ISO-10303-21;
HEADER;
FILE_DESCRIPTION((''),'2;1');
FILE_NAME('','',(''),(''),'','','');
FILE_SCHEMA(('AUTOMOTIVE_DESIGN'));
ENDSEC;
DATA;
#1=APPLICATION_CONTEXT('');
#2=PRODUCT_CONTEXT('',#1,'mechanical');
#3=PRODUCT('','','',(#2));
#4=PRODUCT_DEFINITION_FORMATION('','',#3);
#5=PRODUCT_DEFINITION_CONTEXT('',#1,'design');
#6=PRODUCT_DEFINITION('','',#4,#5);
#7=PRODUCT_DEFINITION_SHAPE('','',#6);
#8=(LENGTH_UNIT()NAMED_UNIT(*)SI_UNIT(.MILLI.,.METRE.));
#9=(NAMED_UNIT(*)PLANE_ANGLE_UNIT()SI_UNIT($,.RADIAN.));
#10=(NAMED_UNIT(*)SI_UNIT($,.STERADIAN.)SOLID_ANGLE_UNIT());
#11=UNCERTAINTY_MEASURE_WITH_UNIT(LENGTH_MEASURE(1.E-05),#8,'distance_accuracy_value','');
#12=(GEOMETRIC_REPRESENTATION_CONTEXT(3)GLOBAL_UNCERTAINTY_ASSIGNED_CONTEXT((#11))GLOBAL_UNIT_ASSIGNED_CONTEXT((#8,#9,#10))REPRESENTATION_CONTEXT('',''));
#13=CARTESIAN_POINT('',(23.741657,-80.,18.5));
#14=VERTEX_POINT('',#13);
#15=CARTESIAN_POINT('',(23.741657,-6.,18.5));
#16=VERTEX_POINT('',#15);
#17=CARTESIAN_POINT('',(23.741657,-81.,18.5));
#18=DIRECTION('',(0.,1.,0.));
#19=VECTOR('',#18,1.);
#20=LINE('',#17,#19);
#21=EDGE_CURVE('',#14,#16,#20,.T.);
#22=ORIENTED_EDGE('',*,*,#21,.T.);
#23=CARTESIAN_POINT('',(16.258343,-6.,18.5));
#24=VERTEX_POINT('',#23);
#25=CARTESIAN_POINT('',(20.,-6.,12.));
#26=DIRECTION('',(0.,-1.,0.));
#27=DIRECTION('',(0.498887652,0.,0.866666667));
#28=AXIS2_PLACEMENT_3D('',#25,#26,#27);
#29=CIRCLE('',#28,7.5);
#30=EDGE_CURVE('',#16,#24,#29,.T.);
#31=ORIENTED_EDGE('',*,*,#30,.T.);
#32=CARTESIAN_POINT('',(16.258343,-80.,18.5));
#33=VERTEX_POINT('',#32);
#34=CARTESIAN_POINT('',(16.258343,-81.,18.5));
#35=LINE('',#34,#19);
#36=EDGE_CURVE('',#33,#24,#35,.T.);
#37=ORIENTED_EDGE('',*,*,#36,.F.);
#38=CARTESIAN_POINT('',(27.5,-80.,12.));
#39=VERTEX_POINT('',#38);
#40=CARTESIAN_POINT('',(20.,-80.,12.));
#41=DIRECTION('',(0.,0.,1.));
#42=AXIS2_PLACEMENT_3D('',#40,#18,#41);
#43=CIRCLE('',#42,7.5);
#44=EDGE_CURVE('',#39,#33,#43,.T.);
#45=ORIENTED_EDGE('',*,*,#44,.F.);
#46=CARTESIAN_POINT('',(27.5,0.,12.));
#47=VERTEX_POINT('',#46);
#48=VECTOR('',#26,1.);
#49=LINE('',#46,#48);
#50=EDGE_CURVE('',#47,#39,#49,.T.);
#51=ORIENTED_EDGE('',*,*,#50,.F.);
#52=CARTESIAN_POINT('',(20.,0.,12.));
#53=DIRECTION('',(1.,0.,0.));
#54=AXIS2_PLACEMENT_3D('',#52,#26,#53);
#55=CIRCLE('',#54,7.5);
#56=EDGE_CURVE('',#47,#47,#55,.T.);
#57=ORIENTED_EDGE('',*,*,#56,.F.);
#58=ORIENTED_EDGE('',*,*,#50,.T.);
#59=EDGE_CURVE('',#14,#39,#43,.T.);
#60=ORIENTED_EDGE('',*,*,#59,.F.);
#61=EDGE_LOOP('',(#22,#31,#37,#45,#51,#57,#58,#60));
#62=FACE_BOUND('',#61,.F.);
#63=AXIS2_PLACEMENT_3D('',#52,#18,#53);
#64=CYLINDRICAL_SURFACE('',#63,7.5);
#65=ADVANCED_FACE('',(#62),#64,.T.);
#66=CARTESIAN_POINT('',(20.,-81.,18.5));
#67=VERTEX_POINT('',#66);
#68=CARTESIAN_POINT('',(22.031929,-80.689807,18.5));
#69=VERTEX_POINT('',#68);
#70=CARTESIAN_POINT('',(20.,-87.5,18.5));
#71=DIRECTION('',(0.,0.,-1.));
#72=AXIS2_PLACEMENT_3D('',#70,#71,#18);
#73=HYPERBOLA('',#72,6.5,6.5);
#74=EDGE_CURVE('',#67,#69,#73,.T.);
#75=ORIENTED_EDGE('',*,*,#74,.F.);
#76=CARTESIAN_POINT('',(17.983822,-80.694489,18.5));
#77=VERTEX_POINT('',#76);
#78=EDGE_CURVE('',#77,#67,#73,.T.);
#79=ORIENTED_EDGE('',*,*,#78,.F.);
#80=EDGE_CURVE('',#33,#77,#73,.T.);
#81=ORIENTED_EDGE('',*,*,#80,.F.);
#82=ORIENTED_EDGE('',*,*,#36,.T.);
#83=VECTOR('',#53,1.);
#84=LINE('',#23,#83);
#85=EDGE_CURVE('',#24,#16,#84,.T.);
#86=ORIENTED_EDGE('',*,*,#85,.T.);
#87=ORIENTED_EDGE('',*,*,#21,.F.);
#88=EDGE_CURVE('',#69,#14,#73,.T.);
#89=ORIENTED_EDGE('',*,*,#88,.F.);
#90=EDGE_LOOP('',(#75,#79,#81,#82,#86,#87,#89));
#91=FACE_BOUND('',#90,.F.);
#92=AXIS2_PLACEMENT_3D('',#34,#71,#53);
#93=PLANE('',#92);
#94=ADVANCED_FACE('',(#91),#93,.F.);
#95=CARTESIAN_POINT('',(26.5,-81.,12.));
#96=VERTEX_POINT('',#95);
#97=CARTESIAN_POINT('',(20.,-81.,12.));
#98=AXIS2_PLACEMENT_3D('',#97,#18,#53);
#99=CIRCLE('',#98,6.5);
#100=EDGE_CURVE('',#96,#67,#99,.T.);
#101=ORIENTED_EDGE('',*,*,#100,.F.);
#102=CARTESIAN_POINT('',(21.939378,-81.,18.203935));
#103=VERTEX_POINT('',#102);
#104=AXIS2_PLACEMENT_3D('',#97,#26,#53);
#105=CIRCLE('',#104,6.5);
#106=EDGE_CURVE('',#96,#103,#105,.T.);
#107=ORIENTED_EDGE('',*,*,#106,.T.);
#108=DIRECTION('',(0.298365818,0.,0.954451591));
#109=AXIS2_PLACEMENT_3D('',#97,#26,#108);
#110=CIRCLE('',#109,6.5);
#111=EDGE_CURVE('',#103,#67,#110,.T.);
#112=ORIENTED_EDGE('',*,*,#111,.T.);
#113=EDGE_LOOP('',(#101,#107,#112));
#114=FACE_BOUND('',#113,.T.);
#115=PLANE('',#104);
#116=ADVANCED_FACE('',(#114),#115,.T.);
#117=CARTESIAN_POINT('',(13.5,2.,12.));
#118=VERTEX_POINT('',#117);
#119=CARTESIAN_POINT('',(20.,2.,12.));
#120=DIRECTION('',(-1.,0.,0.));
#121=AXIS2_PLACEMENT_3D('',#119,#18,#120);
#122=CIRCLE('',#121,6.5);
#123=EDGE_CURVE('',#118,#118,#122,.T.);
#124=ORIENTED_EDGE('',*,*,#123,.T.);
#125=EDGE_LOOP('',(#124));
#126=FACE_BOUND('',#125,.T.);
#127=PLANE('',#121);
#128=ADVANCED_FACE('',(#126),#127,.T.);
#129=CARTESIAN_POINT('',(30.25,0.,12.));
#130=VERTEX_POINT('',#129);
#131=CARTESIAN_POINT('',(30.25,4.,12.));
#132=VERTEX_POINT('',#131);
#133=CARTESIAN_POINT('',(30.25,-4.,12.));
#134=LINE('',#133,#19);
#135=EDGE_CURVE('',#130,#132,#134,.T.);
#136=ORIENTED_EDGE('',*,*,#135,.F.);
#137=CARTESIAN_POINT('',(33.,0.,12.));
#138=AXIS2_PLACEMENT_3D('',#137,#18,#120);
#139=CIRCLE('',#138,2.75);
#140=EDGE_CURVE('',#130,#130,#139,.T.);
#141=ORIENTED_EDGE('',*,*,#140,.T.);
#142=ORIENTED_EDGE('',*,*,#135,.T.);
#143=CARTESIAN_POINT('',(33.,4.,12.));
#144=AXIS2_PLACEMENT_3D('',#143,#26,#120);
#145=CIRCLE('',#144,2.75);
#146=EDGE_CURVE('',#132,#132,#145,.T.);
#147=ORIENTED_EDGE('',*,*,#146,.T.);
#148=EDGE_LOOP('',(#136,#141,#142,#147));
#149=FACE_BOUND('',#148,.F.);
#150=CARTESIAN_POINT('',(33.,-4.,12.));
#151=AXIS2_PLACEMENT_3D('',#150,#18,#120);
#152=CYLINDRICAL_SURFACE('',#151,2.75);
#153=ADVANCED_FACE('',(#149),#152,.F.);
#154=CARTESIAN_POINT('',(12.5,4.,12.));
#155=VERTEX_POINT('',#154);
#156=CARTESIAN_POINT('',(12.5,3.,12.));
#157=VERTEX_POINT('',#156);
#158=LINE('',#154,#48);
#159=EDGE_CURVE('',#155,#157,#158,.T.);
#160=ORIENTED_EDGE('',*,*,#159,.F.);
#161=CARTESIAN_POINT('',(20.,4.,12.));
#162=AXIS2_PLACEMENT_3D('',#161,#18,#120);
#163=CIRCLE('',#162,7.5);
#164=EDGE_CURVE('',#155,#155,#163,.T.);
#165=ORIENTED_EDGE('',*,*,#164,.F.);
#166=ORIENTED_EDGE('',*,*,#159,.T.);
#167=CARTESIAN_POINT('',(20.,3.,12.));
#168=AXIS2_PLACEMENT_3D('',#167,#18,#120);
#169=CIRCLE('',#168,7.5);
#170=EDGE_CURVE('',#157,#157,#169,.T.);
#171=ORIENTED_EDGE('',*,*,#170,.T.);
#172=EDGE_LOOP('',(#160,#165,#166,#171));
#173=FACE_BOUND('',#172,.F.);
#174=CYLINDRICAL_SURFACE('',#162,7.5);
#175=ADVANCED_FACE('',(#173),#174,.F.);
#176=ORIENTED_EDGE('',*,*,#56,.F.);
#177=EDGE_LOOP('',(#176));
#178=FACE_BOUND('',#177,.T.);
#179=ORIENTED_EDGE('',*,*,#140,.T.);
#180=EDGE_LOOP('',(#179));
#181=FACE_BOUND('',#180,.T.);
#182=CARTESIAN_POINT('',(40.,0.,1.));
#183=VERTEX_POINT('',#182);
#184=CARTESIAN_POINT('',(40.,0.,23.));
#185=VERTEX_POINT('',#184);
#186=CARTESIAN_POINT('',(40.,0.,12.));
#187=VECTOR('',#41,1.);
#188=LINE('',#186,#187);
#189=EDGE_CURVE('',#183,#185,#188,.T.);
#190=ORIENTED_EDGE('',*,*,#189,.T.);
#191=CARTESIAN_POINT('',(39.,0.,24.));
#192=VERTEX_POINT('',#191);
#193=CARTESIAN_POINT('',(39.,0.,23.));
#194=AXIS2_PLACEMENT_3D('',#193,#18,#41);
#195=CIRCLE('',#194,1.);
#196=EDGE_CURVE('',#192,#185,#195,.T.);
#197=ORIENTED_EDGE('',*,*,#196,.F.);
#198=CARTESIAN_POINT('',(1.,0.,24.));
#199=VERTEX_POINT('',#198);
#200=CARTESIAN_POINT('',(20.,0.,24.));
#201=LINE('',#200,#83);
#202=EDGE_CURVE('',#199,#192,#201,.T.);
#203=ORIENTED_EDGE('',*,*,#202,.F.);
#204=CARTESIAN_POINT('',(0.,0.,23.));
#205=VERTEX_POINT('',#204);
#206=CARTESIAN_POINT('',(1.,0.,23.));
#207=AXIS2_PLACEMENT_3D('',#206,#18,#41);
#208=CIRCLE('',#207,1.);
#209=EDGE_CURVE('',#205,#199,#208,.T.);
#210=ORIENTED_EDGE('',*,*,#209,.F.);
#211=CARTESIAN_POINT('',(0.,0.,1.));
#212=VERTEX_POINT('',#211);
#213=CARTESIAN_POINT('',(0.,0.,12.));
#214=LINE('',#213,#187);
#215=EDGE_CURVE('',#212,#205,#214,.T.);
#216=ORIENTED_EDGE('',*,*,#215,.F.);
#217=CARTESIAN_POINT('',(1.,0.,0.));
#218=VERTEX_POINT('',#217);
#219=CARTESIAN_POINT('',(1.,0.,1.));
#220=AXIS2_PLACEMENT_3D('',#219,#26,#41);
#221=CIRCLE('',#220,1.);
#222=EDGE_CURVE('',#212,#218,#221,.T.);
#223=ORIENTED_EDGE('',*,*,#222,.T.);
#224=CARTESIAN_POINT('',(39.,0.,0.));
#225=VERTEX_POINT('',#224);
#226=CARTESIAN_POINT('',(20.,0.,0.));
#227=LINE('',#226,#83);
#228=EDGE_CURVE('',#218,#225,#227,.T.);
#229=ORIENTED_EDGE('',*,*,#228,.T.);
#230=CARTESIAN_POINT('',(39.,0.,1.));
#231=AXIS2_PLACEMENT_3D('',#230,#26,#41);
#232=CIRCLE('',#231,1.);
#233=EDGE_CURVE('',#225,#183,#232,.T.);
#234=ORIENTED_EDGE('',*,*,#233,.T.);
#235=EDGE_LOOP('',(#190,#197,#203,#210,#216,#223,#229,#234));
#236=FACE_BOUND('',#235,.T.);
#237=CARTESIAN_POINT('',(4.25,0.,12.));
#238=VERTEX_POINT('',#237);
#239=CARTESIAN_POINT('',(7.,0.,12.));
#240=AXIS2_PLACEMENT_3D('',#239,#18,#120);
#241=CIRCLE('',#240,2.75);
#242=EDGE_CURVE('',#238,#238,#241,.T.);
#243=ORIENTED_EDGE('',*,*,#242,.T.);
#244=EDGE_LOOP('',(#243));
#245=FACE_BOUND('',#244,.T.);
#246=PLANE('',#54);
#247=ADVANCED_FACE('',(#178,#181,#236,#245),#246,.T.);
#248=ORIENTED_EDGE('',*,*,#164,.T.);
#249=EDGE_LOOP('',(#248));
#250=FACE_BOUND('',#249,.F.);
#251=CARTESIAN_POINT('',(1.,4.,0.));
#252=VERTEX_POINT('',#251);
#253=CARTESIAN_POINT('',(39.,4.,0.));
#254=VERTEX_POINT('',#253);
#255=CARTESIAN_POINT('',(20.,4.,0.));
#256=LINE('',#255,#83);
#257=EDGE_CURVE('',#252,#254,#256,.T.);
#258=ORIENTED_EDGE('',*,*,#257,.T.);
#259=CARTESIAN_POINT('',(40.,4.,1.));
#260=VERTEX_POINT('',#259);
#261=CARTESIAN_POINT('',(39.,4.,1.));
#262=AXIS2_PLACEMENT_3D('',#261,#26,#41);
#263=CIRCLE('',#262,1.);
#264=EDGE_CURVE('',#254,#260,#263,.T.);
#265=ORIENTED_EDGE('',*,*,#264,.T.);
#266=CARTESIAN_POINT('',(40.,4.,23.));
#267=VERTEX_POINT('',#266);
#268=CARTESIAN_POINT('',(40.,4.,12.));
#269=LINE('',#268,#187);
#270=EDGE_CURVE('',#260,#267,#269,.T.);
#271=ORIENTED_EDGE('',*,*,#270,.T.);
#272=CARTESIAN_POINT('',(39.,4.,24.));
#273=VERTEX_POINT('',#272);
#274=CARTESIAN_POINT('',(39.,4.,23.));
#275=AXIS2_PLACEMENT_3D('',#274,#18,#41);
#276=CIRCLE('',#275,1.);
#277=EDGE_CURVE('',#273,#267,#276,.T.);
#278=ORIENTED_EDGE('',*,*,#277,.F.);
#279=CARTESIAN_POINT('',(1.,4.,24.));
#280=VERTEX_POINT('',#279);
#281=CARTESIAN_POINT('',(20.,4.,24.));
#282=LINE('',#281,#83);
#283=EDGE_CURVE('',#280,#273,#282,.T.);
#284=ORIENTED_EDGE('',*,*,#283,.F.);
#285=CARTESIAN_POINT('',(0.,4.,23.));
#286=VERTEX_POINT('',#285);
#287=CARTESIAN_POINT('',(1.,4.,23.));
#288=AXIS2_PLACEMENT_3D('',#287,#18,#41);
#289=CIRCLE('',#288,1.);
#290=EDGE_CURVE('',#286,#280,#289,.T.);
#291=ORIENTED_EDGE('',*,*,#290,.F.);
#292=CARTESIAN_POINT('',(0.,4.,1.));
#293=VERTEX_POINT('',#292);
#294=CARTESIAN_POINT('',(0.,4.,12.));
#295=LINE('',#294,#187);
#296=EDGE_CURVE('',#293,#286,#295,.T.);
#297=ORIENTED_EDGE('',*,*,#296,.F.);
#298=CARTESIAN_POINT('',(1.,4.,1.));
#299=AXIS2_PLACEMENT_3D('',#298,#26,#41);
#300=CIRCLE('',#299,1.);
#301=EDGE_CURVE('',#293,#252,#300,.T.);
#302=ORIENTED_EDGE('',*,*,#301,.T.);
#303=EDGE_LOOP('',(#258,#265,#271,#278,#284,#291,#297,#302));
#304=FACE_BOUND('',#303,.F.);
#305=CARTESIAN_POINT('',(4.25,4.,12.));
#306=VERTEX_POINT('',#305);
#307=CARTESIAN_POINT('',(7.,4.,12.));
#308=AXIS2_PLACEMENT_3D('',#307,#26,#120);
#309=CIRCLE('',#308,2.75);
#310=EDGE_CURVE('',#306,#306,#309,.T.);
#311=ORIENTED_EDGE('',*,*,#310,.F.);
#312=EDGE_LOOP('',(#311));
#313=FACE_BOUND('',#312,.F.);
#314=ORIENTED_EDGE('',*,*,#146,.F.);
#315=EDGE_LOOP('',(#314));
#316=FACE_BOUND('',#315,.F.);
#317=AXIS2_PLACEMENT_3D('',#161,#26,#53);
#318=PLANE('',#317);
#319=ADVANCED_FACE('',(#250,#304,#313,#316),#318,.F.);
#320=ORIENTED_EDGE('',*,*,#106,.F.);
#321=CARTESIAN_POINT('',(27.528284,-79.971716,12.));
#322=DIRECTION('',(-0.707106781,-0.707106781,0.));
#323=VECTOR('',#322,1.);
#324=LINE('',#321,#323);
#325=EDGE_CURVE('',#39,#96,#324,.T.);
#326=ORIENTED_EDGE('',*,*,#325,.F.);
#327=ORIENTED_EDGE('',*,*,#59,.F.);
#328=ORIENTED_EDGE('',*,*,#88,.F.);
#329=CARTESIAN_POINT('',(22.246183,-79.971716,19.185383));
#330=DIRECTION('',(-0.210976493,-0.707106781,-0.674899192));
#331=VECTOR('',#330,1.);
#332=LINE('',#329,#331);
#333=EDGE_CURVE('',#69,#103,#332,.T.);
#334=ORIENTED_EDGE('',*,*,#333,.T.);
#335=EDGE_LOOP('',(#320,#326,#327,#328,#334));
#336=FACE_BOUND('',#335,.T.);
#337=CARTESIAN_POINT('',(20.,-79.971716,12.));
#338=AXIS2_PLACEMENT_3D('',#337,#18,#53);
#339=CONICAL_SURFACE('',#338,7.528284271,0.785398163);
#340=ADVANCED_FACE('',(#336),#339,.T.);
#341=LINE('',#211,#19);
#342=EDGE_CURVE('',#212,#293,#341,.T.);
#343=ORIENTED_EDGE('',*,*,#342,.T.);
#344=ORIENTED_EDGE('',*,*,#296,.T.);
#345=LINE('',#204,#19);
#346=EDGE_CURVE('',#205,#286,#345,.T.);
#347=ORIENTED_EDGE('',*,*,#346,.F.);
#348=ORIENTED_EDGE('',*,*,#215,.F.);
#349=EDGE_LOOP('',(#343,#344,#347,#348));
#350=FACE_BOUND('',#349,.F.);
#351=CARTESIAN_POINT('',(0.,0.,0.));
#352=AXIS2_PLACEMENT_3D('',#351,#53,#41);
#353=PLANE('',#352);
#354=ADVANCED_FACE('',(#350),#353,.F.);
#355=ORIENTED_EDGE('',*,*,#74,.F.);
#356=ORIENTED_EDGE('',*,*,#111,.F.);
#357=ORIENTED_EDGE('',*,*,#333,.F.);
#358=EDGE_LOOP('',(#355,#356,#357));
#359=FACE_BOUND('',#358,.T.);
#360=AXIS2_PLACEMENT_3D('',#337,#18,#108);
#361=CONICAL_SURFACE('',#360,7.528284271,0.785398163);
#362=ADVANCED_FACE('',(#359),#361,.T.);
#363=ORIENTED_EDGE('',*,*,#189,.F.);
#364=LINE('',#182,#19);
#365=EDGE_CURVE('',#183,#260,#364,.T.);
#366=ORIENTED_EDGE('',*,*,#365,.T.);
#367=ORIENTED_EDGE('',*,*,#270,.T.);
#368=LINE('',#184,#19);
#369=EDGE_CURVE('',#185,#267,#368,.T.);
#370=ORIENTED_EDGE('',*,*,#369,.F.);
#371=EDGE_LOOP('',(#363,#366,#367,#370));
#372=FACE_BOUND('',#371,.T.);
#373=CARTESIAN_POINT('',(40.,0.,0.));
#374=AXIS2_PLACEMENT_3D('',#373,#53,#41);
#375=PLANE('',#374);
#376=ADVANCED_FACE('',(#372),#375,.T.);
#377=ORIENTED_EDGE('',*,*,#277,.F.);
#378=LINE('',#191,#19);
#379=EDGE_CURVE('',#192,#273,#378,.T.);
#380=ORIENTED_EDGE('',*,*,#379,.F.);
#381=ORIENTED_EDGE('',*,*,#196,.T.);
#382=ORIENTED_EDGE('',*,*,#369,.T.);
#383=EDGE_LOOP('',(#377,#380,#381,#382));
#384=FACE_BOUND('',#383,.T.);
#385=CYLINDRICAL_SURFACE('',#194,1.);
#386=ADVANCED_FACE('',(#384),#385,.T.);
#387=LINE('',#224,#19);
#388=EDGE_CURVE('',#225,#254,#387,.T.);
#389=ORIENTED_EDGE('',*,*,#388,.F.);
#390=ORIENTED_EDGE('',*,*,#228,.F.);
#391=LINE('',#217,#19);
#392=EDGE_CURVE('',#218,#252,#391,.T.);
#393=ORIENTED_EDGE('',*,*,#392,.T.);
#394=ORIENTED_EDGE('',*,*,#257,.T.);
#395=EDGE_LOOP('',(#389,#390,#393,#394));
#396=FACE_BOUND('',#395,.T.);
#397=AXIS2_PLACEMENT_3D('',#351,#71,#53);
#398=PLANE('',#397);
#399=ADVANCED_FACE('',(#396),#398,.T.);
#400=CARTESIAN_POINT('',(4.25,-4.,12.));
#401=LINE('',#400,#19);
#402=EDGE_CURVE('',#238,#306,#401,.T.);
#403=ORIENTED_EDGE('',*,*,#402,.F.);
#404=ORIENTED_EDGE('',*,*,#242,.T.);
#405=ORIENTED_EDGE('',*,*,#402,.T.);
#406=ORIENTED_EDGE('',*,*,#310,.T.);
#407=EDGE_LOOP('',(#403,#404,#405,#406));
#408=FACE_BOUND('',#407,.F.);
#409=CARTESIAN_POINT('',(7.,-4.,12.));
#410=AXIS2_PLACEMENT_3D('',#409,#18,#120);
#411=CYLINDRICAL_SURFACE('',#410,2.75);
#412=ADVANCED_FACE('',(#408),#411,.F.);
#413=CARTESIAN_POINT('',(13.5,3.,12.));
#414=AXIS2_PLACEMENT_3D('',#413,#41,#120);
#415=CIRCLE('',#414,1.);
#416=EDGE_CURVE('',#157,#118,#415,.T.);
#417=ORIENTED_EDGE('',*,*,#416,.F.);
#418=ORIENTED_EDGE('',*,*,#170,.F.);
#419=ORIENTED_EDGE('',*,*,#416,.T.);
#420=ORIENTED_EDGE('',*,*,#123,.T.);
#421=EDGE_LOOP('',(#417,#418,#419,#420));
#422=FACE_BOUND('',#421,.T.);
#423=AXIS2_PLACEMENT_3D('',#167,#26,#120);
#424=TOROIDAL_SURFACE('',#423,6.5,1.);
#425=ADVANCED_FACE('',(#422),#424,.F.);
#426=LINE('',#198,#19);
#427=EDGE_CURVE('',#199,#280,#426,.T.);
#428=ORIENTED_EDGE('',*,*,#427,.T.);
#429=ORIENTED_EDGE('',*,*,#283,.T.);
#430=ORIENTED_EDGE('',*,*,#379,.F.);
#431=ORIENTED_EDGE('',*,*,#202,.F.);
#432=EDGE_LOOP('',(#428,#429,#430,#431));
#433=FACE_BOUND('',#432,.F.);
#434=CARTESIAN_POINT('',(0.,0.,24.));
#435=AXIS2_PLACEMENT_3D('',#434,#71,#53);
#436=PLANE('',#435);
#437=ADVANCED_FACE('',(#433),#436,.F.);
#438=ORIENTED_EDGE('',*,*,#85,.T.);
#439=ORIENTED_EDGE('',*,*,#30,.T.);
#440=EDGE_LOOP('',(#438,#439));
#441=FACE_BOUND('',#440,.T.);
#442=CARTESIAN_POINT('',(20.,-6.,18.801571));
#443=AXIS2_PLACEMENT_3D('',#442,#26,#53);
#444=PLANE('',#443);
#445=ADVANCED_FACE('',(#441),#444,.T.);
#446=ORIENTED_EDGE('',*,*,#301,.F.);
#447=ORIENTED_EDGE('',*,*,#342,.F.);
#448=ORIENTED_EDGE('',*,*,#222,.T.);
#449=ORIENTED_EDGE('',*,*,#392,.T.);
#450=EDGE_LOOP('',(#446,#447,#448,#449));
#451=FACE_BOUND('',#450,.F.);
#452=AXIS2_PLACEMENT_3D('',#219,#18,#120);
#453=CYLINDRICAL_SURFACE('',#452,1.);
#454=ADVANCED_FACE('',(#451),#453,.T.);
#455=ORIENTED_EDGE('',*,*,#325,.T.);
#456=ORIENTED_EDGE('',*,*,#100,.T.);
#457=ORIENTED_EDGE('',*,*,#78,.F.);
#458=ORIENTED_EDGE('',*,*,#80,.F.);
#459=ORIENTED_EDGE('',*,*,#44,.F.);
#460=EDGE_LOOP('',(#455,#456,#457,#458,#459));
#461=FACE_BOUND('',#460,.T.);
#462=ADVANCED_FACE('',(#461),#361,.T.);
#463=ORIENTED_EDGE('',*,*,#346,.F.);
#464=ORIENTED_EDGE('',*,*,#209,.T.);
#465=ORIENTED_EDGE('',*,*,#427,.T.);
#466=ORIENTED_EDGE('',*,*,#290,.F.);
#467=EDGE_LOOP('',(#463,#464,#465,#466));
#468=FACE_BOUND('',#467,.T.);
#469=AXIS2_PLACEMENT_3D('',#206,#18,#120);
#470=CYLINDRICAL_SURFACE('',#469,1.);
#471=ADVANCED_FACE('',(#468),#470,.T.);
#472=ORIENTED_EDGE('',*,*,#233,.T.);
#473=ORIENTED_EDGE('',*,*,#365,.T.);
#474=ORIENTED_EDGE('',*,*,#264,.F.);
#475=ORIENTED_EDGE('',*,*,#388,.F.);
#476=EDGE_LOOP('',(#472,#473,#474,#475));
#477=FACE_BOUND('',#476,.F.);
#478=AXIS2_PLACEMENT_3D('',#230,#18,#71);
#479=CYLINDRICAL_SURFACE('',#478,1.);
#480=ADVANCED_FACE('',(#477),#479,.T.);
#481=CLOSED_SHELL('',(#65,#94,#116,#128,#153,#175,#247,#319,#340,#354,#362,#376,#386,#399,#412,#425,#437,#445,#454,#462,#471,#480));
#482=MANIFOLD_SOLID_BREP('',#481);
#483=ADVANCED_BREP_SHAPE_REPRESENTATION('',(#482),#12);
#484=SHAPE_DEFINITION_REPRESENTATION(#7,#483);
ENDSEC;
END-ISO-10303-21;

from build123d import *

# Parameters (mm, degrees)
F0_W        = 40
F0_H        = 24
F0_R        = 2.5
F0_R_2      = 7.5
F1_DEPTH    = 4
F3_DEPTH    = 81
F4_D        = 5.5
F4_DEPTH    = 4
F4_TIP      = 1.6523667023
F6_DEPTH    = 75
F7_T2_ANGLE = 287.359476763
F7_T4_ANGLE = 107.2329087186
F8_R        = 7.5
F9_DEPTH    = 2
F10_R       = 1


# Not quite as in the source:
# - a fillet or chamfer that OpenCascade refuses, or shapes differently, is made with other operations: its cross-section is extruded or revolved along the edge and cut away or added


with BuildPart() as f1:
    # F0 (on Front) → F1 (new body)
    with BuildSketch(Plane.XZ):
        with Locations((20, 12)):
            Rectangle(F0_W, F0_H)
        with Locations((7, 12)):
            Circle(F0_R, mode=Mode.SUBTRACT)
        with Locations((20, 12)):
            Circle(F0_R_2, mode=Mode.SUBTRACT)
        with Locations((33, 12)):
            Circle(F0_R, mode=Mode.SUBTRACT)
        with Locations((20, 12)):
            Circle(F0_R_2)
        with Locations((7, 12)):
            Circle(F0_R)
        with Locations((33, 12)):
            Circle(F0_R)
    extrude(amount=-F1_DEPTH)

    # F0 (on Front) → F3 (join)
    with BuildSketch(Plane.XZ):
        with Locations((20, 12)):
            Circle(F0_R_2)
    extrude(amount=F3_DEPTH)

    # F4
    with Locations(Plane.XZ):
        with Locations((33, 12), (7, 12)):
            Hole(F4_D / 2, depth=F4_DEPTH)
            with Locations((0, 0, -(F4_DEPTH + F4_TIP / 2))):  # 118° drill point
                Cone(0, F4_D / 2, F4_TIP, mode=Mode.SUBTRACT)

    # F5 (on face) → F6 (cut)
    with BuildSketch(Plane.XZ.offset(81)):
        with BuildLine():
            ThreePointArc((23.7416573868, 18.5), (20, 19.5), (16.2583426132, 18.5))
            Line((16.2583426132, 18.5), (23.7416573868, 18.5))
        make_face()
    extrude(amount=-F6_DEPTH, mode=Mode.SUBTRACT)

    # F7: chamfer of 1 on 2 edges, made by hand

    # F7_s1 → F7_t2 (revolve, cut)
    with BuildSketch(Plane(origin=(14.8022480235, 0, -4.6272486525), x_dir=(0, 1, 0), z_dir=(0.9544515906, 0, -0.2983658178))):
        with BuildLine():
            Line((-79.9717157288, 24.9490197138), (-81.0282842712, 23.8924511713))
            Line((-81.0282842712, 23.8924511713), (-81.0482842712, 23.8924511713))
            ThreePointArc((-81.0482842712, 23.8924511713), (-81.02, 24.406593307), (-81.02, 24.9207354426))
            Line((-81.02, 24.9207354426), (-81, 24.9407354426))
            ThreePointArc((-81, 24.9407354426), (-80.4858578644, 24.9407354426), (-79.9717157288, 24.9690197138))
            Line((-79.9717157288, 24.9690197138), (-79.9717157288, 24.9490197138))
        make_face()
    revolve(axis=Axis((20, -81, 12), (0, -1, 0)), revolution_arc=F7_T2_ANGLE, mode=Mode.SUBTRACT)

    # F7_s3 → F7_t4 (revolve, cut)
    with BuildSketch(Plane.XY.offset(12)):
        with BuildLine():
            Line((27.5282842712, -79.9717157288), (26.4717157288, -81.0282842712))
            Line((26.4717157288, -81.0282842712), (26.4717157288, -81.0482842712))
            ThreePointArc((26.4717157288, -81.0482842712), (26.9858578644, -81.02), (27.5, -81.02))
            Line((27.5, -81.02), (27.52, -81))
            ThreePointArc((27.52, -81), (27.52, -80.4858578644), (27.5482842712, -79.9717157288))
            Line((27.5482842712, -79.9717157288), (27.5282842712, -79.9717157288))
        make_face()
    revolve(axis=Axis((20, -81, 12), (0, -1, 0)), revolution_arc=F7_T4_ANGLE, mode=Mode.SUBTRACT)

    # F8 (on face) → F9 (cut)
    with BuildSketch(Plane(origin=(0, 4, 0), x_dir=(-1, 0, 0), z_dir=(0, 1, 0))):
        with Locations((-20, 12)):
            Circle(F8_R)
    extrude(amount=-F9_DEPTH, mode=Mode.SUBTRACT)

    # F10
    f10_edges = [f1.edges().sort_by_distance(p)[0] for p in [
        (0, 2, 24),
        (0, 2, 0),
        (40, 2, 0),
        (40, 2, 24),
        (27.5, 2, 12),
    ]]
    fillet(f10_edges, radius=F10_R)


solid = f1.part
